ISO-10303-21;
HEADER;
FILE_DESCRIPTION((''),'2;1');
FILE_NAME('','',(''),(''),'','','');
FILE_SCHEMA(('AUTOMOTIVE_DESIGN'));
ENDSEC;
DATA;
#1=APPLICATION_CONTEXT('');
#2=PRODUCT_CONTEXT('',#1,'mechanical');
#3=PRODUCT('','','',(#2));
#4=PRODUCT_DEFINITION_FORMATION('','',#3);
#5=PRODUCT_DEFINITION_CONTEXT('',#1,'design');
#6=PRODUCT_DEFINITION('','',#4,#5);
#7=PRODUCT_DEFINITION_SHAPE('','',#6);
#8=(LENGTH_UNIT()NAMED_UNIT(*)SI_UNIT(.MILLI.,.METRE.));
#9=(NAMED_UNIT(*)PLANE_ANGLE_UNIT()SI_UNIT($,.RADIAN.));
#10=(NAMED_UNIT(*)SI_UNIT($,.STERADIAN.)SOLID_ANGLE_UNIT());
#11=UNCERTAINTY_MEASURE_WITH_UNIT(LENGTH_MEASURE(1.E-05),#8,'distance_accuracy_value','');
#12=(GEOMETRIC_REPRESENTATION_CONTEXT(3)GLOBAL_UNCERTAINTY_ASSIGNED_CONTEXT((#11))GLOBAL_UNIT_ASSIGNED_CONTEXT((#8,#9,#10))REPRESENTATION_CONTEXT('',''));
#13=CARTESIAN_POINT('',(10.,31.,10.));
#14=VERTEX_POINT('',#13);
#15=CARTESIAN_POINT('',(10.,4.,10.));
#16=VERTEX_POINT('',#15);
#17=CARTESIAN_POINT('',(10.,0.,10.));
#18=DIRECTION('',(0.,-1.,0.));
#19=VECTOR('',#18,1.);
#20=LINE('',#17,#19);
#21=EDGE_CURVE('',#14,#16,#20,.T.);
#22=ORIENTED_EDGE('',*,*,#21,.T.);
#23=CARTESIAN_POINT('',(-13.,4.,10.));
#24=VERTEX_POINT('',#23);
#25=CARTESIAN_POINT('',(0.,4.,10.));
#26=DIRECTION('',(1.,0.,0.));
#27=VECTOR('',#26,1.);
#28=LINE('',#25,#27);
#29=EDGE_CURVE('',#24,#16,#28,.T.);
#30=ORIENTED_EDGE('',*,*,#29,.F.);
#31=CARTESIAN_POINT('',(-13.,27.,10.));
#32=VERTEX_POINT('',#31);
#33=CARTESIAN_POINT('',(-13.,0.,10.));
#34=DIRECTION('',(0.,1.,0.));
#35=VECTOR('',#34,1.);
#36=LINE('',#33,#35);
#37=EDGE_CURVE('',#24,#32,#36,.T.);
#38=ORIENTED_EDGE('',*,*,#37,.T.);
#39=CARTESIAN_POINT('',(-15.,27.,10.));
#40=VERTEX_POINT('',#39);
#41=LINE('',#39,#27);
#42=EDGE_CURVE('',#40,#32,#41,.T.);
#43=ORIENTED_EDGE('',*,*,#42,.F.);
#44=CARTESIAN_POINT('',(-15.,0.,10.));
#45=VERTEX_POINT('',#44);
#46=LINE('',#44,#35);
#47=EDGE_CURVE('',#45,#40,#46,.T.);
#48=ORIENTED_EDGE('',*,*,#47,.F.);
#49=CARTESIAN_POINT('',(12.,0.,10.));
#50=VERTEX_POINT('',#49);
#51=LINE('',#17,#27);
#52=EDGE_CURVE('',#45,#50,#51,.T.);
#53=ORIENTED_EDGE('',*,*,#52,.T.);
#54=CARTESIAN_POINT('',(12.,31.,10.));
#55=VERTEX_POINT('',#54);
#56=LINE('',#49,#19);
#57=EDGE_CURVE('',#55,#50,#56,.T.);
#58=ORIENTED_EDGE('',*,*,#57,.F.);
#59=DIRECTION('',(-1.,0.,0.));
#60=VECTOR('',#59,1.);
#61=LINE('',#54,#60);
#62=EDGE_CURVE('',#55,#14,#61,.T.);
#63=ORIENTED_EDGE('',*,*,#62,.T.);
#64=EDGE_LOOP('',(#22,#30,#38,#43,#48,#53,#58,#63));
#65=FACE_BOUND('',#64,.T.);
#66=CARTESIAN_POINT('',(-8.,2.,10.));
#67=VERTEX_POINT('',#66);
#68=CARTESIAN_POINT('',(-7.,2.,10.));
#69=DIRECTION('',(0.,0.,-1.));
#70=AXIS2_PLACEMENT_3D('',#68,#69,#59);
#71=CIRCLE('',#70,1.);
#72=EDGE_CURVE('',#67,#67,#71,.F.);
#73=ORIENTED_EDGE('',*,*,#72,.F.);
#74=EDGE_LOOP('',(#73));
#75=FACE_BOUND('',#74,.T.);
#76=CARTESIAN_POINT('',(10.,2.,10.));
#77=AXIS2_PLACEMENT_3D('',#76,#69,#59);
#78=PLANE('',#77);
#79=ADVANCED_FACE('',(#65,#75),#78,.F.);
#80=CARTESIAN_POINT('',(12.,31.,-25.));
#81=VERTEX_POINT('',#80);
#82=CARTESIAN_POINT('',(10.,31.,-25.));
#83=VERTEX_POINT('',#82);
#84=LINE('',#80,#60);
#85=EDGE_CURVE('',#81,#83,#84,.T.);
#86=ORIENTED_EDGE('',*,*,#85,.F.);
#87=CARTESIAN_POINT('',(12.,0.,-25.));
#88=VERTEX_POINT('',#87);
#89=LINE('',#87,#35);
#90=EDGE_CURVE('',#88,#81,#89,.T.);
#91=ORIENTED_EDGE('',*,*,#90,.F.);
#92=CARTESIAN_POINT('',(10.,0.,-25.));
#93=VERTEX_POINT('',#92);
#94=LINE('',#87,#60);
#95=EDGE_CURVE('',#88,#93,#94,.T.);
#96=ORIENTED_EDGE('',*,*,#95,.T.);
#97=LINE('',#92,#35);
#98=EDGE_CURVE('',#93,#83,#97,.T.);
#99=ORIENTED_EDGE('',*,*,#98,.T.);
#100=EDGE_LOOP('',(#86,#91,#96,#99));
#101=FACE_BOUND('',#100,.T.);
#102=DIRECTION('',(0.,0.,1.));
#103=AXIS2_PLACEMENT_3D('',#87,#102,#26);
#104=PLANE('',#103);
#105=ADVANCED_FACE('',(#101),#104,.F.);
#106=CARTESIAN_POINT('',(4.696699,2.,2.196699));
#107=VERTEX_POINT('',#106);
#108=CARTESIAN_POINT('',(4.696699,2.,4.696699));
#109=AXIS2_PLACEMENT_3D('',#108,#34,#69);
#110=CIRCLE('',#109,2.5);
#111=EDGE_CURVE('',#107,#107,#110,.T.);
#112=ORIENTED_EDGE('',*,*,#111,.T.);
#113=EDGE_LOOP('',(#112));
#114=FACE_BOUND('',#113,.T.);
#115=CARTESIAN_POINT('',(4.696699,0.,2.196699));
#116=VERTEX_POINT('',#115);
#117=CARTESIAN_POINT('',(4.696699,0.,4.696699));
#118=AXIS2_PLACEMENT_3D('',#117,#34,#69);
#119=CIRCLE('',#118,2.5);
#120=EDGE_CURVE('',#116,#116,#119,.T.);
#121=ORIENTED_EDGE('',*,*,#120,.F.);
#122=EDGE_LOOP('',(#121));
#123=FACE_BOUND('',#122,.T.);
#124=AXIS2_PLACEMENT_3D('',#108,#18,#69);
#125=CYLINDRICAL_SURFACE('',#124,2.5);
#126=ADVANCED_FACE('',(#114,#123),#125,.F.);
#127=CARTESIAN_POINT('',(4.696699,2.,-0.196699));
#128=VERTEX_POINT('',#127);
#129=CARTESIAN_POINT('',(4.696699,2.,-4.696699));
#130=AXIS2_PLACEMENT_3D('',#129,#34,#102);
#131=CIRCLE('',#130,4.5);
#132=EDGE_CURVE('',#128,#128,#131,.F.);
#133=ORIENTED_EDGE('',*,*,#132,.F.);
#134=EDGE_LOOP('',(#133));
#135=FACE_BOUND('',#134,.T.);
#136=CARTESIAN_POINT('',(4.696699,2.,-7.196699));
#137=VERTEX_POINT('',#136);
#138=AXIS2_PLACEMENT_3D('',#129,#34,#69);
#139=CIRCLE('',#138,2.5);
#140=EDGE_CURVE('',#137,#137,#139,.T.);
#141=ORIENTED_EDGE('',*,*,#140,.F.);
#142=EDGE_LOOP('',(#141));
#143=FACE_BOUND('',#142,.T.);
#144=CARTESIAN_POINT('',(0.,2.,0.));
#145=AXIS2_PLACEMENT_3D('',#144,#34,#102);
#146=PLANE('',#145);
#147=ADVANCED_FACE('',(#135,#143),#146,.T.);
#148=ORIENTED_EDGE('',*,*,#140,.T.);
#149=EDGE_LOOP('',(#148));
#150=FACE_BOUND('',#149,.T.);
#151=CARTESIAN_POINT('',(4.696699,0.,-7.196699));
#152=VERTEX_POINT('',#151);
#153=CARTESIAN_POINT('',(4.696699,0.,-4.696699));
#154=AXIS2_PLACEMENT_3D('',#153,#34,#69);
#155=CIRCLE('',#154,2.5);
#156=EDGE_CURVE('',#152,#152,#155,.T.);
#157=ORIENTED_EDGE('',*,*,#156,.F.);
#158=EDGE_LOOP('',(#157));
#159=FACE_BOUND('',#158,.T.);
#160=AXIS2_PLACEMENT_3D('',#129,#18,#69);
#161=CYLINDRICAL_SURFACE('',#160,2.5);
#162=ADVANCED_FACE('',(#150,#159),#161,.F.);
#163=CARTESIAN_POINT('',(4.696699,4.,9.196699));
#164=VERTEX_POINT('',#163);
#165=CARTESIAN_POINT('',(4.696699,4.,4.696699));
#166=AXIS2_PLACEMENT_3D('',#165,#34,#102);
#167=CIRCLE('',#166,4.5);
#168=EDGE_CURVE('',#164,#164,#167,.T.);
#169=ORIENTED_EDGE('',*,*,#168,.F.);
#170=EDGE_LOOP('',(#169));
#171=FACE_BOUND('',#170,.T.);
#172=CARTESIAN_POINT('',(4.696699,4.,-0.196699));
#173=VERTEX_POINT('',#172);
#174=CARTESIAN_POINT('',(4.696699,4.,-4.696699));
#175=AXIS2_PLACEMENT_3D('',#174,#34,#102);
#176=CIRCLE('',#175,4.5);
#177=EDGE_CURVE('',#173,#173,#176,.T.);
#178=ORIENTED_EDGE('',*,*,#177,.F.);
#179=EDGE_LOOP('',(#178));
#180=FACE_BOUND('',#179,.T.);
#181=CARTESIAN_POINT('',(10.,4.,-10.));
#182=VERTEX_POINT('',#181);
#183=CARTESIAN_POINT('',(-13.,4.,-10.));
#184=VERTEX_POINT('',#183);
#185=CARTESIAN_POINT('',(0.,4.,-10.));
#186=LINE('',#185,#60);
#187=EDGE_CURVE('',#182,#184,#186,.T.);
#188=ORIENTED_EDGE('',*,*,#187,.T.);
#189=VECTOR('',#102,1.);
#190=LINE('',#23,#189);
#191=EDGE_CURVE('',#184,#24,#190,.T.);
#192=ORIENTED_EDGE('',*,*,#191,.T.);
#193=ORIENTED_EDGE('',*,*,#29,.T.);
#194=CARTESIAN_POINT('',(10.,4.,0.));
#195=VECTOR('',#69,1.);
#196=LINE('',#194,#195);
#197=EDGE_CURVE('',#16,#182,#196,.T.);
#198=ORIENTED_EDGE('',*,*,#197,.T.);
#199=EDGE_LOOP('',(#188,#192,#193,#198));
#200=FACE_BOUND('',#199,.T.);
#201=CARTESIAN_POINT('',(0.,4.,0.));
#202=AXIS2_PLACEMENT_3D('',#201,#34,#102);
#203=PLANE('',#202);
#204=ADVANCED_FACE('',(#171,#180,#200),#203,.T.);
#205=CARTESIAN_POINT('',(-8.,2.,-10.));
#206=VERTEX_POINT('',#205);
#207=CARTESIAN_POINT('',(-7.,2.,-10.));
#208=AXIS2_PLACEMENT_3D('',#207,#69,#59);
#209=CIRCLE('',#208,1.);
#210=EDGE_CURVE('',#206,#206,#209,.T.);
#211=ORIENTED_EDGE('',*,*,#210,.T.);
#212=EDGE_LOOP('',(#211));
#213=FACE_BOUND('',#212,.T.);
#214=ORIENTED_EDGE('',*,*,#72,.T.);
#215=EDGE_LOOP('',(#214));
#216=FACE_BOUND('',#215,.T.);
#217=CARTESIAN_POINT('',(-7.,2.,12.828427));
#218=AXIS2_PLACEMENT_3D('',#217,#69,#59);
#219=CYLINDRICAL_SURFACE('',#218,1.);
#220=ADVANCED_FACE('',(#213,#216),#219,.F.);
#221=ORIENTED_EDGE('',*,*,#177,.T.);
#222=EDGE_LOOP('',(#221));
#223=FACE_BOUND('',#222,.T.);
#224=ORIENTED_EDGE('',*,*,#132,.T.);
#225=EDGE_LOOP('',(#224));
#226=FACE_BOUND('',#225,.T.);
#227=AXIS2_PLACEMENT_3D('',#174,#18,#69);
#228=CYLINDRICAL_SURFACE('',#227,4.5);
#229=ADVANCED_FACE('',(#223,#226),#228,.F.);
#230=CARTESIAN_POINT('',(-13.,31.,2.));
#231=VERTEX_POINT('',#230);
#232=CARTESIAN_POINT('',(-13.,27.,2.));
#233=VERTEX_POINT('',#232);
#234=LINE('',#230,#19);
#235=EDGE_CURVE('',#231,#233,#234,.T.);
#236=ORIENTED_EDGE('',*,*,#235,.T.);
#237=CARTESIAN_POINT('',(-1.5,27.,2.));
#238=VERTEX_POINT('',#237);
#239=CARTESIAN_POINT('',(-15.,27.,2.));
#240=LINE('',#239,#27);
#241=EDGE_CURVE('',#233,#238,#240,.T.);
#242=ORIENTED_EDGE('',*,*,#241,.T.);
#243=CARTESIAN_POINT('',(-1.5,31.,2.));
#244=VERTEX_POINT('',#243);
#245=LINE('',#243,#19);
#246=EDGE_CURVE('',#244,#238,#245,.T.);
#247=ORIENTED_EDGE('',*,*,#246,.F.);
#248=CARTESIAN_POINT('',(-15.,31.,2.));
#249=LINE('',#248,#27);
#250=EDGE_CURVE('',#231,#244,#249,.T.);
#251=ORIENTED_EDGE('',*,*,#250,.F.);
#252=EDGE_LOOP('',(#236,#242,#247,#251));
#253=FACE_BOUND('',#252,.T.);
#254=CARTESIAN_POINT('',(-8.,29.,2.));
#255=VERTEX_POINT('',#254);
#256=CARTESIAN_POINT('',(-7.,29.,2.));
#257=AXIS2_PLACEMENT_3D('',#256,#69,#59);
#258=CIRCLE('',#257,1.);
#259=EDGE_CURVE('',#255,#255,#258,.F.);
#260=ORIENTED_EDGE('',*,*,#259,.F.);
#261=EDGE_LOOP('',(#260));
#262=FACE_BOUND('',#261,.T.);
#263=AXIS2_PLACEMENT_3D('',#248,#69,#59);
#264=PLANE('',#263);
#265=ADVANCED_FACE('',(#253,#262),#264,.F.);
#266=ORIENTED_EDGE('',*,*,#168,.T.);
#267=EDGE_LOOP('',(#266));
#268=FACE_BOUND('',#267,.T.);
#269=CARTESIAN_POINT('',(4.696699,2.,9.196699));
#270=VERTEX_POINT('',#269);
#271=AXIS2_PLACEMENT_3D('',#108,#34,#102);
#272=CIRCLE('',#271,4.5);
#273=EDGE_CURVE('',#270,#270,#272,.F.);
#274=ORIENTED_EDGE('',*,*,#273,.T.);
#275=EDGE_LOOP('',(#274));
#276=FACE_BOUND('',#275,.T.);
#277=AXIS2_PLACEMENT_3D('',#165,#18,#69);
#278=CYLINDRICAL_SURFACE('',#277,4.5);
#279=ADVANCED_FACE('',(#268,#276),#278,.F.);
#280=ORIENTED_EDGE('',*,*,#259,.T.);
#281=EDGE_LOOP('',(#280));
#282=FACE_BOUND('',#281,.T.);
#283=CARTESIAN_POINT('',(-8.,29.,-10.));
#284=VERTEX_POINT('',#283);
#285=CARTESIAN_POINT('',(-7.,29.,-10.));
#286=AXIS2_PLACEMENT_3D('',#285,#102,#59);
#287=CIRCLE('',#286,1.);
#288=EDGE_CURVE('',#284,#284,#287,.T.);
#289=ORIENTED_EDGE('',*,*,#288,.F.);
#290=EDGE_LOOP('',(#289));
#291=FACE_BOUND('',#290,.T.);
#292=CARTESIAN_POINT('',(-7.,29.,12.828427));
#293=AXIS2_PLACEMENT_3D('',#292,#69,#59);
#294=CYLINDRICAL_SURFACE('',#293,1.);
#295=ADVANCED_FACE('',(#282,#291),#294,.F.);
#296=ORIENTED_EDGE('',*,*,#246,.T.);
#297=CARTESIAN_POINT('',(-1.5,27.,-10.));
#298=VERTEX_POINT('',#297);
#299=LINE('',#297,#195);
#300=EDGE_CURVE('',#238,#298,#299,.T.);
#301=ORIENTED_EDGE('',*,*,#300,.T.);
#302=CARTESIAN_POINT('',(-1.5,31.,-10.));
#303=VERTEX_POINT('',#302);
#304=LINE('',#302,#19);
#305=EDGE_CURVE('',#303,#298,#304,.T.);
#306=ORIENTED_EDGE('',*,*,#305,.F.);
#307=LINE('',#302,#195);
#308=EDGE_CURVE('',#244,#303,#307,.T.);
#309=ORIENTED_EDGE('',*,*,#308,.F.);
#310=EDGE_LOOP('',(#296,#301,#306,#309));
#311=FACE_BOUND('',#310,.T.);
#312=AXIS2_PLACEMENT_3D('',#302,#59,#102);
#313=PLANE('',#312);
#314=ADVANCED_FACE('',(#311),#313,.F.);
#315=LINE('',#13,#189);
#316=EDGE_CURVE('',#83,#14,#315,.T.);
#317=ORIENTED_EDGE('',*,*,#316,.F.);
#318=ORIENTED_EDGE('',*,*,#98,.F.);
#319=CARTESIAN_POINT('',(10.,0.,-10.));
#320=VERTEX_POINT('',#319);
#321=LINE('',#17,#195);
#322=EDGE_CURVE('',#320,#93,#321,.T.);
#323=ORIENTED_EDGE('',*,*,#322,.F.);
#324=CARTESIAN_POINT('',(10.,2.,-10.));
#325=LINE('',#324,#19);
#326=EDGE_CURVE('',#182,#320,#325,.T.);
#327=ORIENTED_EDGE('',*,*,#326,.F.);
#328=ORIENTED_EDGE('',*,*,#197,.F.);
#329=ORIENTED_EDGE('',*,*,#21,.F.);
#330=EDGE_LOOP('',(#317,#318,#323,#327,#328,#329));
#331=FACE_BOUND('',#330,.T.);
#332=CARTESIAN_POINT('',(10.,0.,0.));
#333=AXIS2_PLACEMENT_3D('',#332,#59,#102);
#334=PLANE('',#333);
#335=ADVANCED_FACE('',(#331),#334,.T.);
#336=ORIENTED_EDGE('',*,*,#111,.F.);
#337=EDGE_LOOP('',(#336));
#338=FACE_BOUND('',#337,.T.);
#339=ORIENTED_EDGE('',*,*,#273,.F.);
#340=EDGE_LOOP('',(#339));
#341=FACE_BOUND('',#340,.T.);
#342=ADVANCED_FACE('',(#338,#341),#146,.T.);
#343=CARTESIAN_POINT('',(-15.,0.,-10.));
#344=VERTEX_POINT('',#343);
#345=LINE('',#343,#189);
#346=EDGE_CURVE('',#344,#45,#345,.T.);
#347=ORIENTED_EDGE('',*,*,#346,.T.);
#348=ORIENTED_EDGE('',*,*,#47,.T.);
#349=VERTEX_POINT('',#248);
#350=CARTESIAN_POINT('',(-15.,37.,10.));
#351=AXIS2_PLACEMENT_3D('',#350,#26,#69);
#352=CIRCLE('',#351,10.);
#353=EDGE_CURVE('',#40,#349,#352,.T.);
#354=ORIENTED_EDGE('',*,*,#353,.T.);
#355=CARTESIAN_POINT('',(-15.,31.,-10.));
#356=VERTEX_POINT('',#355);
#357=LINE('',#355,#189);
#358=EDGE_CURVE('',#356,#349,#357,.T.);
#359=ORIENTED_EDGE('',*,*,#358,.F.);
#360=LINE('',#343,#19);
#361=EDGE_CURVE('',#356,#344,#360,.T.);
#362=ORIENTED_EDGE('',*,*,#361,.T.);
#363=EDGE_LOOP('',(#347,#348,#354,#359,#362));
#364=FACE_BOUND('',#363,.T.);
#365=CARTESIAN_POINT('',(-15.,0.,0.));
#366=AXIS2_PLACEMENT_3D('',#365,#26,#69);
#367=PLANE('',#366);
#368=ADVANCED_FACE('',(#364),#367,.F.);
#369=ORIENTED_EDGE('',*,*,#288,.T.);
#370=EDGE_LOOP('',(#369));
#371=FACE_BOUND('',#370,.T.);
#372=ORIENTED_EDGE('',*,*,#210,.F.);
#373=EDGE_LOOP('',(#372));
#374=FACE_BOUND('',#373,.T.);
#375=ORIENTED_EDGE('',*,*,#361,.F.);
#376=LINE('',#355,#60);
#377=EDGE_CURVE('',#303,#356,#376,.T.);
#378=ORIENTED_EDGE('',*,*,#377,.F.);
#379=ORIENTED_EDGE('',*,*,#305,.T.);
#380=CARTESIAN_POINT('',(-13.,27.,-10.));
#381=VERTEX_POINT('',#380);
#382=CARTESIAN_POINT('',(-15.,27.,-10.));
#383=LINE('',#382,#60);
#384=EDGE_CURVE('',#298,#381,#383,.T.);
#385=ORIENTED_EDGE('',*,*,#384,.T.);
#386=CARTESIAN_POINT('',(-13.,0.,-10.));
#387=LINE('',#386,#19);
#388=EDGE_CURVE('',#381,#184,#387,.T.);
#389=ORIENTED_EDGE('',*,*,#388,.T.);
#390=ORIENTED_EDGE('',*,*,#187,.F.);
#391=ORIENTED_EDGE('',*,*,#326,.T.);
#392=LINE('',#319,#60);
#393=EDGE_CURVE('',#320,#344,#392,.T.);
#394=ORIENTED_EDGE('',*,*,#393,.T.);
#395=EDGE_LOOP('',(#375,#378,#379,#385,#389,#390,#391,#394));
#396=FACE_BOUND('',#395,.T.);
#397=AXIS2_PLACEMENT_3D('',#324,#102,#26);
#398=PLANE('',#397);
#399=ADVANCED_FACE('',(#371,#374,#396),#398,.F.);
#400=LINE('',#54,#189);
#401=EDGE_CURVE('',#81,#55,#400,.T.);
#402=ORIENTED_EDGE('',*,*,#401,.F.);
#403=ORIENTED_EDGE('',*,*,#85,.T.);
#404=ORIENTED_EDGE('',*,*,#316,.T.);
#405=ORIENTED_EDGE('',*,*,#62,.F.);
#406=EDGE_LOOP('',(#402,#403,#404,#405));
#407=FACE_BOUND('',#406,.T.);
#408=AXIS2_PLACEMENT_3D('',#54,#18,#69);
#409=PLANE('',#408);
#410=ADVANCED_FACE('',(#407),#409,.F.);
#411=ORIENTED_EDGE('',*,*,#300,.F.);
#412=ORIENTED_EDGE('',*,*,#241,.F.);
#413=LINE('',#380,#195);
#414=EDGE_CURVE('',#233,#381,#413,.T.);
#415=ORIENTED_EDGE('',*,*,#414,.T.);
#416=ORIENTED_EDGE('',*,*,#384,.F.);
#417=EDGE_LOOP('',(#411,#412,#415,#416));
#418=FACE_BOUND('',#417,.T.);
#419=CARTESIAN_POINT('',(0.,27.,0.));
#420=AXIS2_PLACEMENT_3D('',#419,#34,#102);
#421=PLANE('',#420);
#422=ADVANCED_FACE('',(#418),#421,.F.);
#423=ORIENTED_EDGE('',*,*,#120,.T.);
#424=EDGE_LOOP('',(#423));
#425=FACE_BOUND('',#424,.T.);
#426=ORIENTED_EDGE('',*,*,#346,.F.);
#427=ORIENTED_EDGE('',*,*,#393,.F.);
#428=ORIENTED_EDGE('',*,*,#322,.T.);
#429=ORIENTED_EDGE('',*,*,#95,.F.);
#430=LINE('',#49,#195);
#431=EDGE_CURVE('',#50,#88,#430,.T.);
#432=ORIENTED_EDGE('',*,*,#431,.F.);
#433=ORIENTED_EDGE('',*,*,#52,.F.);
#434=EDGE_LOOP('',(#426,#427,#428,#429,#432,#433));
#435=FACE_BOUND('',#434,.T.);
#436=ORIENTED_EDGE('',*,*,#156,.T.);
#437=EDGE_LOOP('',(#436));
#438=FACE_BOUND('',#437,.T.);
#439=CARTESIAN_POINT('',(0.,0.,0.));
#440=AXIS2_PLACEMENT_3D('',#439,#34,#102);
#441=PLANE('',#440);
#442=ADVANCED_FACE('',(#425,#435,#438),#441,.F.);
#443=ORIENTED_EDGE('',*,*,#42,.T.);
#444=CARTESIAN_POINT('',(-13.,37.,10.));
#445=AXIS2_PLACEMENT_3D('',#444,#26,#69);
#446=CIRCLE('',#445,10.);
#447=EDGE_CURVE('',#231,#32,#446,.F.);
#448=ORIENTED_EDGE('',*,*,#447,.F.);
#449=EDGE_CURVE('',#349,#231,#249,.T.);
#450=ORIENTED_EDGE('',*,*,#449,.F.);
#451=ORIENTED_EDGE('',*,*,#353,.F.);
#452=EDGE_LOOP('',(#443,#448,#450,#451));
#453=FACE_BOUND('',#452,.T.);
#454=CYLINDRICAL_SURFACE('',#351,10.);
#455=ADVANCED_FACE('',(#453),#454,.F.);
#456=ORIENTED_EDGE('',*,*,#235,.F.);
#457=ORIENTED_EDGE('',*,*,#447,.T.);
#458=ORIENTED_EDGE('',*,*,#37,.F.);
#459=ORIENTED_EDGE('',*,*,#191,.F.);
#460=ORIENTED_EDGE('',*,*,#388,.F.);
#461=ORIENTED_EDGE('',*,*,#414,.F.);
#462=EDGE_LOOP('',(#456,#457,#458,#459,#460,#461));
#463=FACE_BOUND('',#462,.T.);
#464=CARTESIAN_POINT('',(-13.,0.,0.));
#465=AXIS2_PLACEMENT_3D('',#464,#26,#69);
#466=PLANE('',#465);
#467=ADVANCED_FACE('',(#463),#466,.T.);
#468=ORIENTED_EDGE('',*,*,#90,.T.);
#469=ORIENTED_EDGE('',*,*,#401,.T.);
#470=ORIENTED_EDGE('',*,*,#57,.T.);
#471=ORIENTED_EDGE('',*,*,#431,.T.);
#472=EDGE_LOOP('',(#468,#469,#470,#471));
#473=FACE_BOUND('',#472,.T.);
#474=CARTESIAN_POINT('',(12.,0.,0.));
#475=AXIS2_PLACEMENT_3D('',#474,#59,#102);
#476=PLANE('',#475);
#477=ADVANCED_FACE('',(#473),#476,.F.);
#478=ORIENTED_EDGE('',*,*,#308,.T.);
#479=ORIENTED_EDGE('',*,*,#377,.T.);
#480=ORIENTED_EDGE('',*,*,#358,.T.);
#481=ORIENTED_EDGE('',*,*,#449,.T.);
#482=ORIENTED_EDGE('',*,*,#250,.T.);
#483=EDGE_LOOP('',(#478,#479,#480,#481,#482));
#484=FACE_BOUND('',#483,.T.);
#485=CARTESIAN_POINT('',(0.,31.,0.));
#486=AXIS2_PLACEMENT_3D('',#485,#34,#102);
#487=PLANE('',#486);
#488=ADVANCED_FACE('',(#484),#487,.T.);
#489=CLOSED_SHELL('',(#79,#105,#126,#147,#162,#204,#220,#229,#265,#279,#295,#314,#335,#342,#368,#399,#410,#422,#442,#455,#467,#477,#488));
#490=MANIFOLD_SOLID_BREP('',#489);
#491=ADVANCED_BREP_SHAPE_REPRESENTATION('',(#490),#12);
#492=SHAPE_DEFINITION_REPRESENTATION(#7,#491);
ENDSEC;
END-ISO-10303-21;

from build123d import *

# Parameters (mm, degrees)
SKETCH1_W           = 20
SKETCH1_H           = 20
SKETCH1_R           = 2.5
BOSS_EXTRUDE1_DEPTH = 2
SKETCH2_W           = 20
SKETCH2_H           = 20
SKETCH2_R           = 4.5
BOSS_EXTRUDE2_DEPTH = 2
SKETCH6_W           = 3
SKETCH6_H           = 20
BOSS_EXTRUDE4_DEPTH = 4
SKETCH4_W           = 20
SKETCH4_H           = 27
BOSS_EXTRUDE3_DEPTH = 2
SKETCH5_R           = 1
CUT_EXTRUDE1_DEPTH  = 20
SKETCH7_W           = 13.5
SKETCH7_H           = 12
BOSS_EXTRUDE5_DEPTH = 4
FILLET3_R           = 10
SKETCH9_W           = 35
SKETCH9_H           = 31
BOSS_EXTRUDE6_DEPTH = 2


with BuildPart() as part:
    # Sketch1 → Boss-Extrude1 (new body)
    with BuildSketch(Plane(origin=(0, 0, 0), x_dir=(1, 0, 0), z_dir=(0, 1, 0))):
        Rectangle(SKETCH1_W, SKETCH1_H)
        with Locations(Location((4.696699141, -4.696699141, 0), (0, 0, 90))):
            Circle(SKETCH1_R, mode=Mode.SUBTRACT)
        with Locations(Location((4.696699141, 4.696699141, 0), (0, 0, 90))):
            Circle(SKETCH1_R, mode=Mode.SUBTRACT)
    extrude(amount=BOSS_EXTRUDE1_DEPTH)

    # Sketch2 → Boss-Extrude2 (add)
    with BuildSketch(Plane(origin=(0, 2, 0), x_dir=(1, 0, 0), z_dir=(0, 1, 0))):
        Rectangle(SKETCH2_W, SKETCH2_H)
        with Locations(Location((4.696699141, -4.696699141, 0), (0, 0, 270))):
            Circle(SKETCH2_R, mode=Mode.SUBTRACT)
        with Locations(Location((4.696699141, 4.696699141, 0), (0, 0, 270))):
            Circle(SKETCH2_R, mode=Mode.SUBTRACT)
    extrude(amount=BOSS_EXTRUDE2_DEPTH)

    # Sketch6 → Boss-Extrude4 (add)
    with BuildSketch(Plane(origin=(0, 4, 0), x_dir=(1, 0, 0), z_dir=(0, 1, 0))):
        with Locations((-11.5, 0)):
            Rectangle(SKETCH6_W, SKETCH6_H)
    extrude(amount=-BOSS_EXTRUDE4_DEPTH)

    # Sketch4 → Boss-Extrude3 (add)
    with BuildSketch(Plane.ZY.offset(13)):
        with Locations((0, 13.5)):
            Rectangle(SKETCH4_W, SKETCH4_H)
    extrude(amount=BOSS_EXTRUDE3_DEPTH)

    # Sketch5 → Cut-Extrude1 (cut)
    with BuildSketch(Plane(origin=(0, 0, -10), x_dir=(-1, 0, 0), z_dir=(0, 0, -1))):
        with Locations((7, 2)):
            Circle(SKETCH5_R)
    cut_extrude1 = extrude(amount=-CUT_EXTRUDE1_DEPTH, mode=Mode.SUBTRACT)

    # Sketch7 → Boss-Extrude5 (add)
    with BuildSketch(Plane(origin=(0, 27, 0), x_dir=(1, 0, 0), z_dir=(0, 1, 0))):
        with Locations((-8.25, 4)):
            Rectangle(SKETCH7_W, SKETCH7_H)
    extrude(amount=BOSS_EXTRUDE5_DEPTH)

    # Mirror1: Cut-Extrude1 across plane
    add(cut_extrude1.mirror(Plane.ZX.offset(15.5)), mode=Mode.SUBTRACT)

    # Fillet3
    # the kernel refuses this fillet: 10 mm, written as the material it adds along each edge
    with BuildSketch(Plane(origin=(-13, 27, 2), x_dir=(0, 0, 1), z_dir=(-1, 0, 0))) as fillet3_piece_1:
        with BuildLine():
            CenterArc((8, 10), FILLET3_R, 216.869897646, 53.130102354)
            Line((0, 4), (0, 0))
            Line((0, 0), (8, 0))
        make_face()
    extrude(amount=2)

    # Sketch9 → Boss-Extrude6 (add)
    with BuildSketch(Plane(origin=(10, 0, 0), x_dir=(0, 0, -1), z_dir=(1, 0, 0))):
        with Locations((7.5, 15.5)):
            Rectangle(SKETCH9_W, SKETCH9_H)
    extrude(amount=BOSS_EXTRUDE6_DEPTH)


solid = part.part
